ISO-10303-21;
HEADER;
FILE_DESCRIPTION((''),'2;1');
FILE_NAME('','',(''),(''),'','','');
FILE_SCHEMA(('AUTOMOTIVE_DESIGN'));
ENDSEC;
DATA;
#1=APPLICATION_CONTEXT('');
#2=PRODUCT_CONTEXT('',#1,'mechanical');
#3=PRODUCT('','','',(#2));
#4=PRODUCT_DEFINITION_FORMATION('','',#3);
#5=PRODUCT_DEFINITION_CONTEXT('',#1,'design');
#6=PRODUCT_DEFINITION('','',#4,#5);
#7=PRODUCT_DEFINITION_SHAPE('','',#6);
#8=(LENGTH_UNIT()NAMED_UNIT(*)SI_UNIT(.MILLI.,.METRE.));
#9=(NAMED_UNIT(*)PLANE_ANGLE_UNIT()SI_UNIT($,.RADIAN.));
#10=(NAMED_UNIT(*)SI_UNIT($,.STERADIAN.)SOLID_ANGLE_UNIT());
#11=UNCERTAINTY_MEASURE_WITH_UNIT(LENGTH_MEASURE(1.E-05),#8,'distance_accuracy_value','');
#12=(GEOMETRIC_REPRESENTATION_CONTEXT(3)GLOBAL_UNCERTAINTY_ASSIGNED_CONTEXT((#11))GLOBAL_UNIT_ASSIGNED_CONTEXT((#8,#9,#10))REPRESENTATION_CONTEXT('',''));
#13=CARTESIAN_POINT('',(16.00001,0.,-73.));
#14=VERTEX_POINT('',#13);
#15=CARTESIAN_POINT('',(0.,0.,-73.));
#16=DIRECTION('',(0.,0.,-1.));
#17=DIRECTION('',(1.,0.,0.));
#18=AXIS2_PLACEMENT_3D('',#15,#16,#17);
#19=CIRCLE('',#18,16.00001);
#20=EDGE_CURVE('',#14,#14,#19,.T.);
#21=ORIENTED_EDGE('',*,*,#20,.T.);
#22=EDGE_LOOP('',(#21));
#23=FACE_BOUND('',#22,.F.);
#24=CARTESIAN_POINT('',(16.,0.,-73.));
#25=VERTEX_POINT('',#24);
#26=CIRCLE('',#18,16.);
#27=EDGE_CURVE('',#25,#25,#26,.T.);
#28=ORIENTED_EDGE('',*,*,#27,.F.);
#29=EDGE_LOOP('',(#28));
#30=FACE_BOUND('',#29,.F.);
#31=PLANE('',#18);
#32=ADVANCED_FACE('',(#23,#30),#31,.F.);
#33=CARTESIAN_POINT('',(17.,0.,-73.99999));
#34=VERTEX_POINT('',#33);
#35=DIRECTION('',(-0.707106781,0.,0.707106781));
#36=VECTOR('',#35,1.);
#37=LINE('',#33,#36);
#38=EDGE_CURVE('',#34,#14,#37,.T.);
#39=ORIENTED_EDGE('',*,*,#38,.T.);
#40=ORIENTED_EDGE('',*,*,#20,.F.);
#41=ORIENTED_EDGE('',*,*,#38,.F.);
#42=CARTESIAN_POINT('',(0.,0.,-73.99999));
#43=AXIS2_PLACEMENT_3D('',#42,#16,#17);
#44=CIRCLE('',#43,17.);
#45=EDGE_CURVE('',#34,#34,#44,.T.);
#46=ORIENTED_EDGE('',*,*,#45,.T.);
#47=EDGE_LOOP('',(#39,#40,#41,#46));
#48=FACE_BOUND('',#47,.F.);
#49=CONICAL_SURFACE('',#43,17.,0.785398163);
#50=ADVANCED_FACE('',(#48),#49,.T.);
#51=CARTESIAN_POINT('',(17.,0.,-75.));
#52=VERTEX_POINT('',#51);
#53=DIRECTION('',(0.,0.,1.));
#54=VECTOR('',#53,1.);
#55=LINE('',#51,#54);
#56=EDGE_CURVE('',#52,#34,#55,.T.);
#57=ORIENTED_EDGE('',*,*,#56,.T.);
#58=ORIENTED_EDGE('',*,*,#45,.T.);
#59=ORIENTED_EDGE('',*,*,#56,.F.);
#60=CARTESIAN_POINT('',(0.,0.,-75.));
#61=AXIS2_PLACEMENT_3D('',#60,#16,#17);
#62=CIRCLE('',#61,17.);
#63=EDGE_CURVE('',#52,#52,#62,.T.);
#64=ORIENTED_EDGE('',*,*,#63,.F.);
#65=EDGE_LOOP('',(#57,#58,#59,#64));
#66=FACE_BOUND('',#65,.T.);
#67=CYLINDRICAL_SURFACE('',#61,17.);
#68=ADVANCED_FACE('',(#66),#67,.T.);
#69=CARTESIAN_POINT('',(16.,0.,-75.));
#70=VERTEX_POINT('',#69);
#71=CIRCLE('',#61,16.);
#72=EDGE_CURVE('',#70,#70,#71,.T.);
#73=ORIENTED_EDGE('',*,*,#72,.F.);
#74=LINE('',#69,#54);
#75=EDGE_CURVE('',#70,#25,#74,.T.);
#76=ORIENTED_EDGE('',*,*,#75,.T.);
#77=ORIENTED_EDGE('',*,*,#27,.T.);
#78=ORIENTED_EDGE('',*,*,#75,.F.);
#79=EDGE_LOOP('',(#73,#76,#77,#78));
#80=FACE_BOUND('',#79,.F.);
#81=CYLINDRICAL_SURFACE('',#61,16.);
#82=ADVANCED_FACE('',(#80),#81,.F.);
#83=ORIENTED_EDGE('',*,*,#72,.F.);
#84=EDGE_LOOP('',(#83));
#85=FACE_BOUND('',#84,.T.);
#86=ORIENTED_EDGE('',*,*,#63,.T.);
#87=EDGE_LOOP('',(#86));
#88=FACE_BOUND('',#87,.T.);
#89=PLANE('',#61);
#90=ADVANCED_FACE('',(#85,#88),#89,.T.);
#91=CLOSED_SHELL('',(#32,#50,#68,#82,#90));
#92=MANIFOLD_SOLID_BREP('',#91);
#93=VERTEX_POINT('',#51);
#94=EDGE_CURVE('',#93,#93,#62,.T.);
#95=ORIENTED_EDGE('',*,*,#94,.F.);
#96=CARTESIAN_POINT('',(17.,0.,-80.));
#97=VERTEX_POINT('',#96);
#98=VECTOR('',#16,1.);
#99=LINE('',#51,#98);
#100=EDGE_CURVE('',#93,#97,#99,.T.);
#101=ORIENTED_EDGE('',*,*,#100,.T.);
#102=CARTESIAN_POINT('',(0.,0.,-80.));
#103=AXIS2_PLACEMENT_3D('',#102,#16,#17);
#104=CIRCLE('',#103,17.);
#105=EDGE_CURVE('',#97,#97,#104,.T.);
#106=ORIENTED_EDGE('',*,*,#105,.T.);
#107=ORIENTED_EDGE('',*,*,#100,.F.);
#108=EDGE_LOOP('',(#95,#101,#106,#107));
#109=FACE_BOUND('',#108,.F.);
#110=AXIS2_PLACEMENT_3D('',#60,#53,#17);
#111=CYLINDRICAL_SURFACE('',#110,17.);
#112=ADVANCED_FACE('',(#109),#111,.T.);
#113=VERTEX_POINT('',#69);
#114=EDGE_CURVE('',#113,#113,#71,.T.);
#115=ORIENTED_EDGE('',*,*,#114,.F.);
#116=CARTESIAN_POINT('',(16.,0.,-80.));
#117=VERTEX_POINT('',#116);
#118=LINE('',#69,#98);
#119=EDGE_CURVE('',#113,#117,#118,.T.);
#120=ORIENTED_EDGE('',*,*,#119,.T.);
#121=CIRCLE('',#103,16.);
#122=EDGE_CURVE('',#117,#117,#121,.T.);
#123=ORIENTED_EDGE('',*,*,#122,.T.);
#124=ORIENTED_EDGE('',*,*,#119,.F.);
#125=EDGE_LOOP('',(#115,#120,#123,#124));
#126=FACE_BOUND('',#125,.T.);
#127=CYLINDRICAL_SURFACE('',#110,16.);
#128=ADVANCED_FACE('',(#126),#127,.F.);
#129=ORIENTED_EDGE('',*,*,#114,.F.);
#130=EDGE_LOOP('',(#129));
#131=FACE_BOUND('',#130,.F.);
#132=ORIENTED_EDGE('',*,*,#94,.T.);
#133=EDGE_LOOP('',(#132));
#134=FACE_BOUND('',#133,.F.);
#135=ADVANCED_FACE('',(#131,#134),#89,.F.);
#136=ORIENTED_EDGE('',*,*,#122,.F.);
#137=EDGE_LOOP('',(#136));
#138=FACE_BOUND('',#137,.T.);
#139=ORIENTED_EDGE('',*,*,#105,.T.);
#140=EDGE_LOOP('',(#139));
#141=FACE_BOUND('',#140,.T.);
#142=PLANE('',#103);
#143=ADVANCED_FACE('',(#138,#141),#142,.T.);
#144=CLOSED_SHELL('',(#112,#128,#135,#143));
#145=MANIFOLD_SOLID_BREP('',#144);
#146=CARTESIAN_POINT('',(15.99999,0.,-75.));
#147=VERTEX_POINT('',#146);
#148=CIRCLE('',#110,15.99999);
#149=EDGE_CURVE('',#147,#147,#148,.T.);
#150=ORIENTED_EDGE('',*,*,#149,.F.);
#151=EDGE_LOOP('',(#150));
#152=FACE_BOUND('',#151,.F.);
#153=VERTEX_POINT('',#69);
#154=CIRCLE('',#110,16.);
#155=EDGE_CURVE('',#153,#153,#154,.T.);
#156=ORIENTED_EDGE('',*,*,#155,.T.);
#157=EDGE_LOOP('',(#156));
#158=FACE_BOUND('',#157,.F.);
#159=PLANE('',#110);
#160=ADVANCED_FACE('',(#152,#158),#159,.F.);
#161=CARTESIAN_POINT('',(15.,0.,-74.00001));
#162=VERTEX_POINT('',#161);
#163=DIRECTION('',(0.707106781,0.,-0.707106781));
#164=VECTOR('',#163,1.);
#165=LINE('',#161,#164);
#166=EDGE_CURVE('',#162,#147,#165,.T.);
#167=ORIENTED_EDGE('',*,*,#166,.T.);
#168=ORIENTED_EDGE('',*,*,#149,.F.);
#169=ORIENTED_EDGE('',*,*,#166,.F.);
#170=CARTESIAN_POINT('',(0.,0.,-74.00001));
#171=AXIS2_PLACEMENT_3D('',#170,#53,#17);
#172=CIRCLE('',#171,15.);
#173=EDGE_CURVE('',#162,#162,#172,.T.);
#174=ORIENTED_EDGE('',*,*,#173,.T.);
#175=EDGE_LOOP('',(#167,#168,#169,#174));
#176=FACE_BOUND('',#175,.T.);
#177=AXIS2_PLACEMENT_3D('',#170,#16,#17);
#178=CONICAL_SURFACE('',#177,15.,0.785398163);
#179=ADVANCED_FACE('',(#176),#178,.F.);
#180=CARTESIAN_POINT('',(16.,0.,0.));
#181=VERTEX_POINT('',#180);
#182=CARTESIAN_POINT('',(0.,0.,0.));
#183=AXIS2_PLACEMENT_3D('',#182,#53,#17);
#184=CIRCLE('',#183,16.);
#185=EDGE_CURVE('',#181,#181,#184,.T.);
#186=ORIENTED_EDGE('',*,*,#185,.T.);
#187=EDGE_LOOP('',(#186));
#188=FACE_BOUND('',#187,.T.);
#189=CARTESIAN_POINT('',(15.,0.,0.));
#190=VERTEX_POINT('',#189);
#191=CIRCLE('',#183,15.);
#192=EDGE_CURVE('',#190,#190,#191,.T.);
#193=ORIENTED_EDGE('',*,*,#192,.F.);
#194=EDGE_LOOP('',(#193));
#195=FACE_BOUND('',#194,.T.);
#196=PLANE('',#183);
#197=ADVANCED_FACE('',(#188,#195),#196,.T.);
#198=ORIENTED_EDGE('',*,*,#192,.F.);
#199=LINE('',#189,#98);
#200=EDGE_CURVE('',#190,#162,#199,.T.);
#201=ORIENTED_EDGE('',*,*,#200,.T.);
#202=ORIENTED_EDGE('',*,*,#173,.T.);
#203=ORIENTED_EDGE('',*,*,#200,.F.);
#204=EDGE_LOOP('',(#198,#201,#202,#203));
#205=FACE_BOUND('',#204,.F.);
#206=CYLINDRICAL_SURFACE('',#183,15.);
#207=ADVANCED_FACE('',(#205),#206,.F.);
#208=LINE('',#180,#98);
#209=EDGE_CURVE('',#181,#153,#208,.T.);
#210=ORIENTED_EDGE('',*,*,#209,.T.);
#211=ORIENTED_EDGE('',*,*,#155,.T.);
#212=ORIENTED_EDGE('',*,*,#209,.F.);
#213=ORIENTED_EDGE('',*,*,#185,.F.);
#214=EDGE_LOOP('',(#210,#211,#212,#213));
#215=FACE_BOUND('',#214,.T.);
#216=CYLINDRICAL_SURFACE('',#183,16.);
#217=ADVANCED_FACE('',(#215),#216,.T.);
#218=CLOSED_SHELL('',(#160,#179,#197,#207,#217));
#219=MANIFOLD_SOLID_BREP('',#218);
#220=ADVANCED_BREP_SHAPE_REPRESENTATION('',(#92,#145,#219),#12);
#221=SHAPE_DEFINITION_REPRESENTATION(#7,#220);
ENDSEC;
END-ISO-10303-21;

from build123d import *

# Parameters (mm, degrees)
F0_R     = 16
F0_R_2   = 15
F1_DEPTH = 75
F2_R     = 17
F2_R_2   = 16
F3_DEPTH = 5
F4_DEPTH = 2
F5_SIZE  = 0.99999
F6_SIZE  = 0.99999


# Not quite as in the source:
# - a fillet or chamfer is up to 0.001 mm smaller than in the source, because OpenCascade refuses the exact size


with BuildPart() as f1:
    # F0 (on Top) → F1 (new body)
    with BuildSketch(Plane.XY):
        Circle(F0_R)
        Circle(F0_R_2, mode=Mode.SUBTRACT)
    extrude(amount=-F1_DEPTH)

    # F5 (size 1 in the source; OpenCascade refuses exactly that, so slightly less here)
    f5_edges = [f1.edges().sort_by_distance(p)[0] for p in [
        (-15, 0, -75),
    ]]
    chamfer(f5_edges, length=F5_SIZE)


with BuildPart() as f3:
    # F2 (on face) → F3 (new body)
    with BuildSketch(Plane(origin=(0, 0, -75), x_dir=(1, 0, 0), z_dir=(0, 0, -1))):
        Circle(F2_R)
        Circle(F2_R_2, mode=Mode.SUBTRACT)
    extrude(amount=F3_DEPTH)


with BuildPart() as f4:
    # F4 (new): a face of the model
    f4_faces = [f3.part.faces().sort_by_distance(p)[0] for p in [
        (-16.5191673888, 0, -75),
    ]]
    extrude(f4_faces, amount=F4_DEPTH)

    # F6 (size 1 in the source; OpenCascade refuses exactly that, so slightly less here)
    f6_edges = [f4.edges().sort_by_distance(p)[0] for p in [
        (-17, 0, -73),
    ]]
    chamfer(f6_edges, length=F6_SIZE)


solid = Compound([f1.part, f3.part, f4.part])
